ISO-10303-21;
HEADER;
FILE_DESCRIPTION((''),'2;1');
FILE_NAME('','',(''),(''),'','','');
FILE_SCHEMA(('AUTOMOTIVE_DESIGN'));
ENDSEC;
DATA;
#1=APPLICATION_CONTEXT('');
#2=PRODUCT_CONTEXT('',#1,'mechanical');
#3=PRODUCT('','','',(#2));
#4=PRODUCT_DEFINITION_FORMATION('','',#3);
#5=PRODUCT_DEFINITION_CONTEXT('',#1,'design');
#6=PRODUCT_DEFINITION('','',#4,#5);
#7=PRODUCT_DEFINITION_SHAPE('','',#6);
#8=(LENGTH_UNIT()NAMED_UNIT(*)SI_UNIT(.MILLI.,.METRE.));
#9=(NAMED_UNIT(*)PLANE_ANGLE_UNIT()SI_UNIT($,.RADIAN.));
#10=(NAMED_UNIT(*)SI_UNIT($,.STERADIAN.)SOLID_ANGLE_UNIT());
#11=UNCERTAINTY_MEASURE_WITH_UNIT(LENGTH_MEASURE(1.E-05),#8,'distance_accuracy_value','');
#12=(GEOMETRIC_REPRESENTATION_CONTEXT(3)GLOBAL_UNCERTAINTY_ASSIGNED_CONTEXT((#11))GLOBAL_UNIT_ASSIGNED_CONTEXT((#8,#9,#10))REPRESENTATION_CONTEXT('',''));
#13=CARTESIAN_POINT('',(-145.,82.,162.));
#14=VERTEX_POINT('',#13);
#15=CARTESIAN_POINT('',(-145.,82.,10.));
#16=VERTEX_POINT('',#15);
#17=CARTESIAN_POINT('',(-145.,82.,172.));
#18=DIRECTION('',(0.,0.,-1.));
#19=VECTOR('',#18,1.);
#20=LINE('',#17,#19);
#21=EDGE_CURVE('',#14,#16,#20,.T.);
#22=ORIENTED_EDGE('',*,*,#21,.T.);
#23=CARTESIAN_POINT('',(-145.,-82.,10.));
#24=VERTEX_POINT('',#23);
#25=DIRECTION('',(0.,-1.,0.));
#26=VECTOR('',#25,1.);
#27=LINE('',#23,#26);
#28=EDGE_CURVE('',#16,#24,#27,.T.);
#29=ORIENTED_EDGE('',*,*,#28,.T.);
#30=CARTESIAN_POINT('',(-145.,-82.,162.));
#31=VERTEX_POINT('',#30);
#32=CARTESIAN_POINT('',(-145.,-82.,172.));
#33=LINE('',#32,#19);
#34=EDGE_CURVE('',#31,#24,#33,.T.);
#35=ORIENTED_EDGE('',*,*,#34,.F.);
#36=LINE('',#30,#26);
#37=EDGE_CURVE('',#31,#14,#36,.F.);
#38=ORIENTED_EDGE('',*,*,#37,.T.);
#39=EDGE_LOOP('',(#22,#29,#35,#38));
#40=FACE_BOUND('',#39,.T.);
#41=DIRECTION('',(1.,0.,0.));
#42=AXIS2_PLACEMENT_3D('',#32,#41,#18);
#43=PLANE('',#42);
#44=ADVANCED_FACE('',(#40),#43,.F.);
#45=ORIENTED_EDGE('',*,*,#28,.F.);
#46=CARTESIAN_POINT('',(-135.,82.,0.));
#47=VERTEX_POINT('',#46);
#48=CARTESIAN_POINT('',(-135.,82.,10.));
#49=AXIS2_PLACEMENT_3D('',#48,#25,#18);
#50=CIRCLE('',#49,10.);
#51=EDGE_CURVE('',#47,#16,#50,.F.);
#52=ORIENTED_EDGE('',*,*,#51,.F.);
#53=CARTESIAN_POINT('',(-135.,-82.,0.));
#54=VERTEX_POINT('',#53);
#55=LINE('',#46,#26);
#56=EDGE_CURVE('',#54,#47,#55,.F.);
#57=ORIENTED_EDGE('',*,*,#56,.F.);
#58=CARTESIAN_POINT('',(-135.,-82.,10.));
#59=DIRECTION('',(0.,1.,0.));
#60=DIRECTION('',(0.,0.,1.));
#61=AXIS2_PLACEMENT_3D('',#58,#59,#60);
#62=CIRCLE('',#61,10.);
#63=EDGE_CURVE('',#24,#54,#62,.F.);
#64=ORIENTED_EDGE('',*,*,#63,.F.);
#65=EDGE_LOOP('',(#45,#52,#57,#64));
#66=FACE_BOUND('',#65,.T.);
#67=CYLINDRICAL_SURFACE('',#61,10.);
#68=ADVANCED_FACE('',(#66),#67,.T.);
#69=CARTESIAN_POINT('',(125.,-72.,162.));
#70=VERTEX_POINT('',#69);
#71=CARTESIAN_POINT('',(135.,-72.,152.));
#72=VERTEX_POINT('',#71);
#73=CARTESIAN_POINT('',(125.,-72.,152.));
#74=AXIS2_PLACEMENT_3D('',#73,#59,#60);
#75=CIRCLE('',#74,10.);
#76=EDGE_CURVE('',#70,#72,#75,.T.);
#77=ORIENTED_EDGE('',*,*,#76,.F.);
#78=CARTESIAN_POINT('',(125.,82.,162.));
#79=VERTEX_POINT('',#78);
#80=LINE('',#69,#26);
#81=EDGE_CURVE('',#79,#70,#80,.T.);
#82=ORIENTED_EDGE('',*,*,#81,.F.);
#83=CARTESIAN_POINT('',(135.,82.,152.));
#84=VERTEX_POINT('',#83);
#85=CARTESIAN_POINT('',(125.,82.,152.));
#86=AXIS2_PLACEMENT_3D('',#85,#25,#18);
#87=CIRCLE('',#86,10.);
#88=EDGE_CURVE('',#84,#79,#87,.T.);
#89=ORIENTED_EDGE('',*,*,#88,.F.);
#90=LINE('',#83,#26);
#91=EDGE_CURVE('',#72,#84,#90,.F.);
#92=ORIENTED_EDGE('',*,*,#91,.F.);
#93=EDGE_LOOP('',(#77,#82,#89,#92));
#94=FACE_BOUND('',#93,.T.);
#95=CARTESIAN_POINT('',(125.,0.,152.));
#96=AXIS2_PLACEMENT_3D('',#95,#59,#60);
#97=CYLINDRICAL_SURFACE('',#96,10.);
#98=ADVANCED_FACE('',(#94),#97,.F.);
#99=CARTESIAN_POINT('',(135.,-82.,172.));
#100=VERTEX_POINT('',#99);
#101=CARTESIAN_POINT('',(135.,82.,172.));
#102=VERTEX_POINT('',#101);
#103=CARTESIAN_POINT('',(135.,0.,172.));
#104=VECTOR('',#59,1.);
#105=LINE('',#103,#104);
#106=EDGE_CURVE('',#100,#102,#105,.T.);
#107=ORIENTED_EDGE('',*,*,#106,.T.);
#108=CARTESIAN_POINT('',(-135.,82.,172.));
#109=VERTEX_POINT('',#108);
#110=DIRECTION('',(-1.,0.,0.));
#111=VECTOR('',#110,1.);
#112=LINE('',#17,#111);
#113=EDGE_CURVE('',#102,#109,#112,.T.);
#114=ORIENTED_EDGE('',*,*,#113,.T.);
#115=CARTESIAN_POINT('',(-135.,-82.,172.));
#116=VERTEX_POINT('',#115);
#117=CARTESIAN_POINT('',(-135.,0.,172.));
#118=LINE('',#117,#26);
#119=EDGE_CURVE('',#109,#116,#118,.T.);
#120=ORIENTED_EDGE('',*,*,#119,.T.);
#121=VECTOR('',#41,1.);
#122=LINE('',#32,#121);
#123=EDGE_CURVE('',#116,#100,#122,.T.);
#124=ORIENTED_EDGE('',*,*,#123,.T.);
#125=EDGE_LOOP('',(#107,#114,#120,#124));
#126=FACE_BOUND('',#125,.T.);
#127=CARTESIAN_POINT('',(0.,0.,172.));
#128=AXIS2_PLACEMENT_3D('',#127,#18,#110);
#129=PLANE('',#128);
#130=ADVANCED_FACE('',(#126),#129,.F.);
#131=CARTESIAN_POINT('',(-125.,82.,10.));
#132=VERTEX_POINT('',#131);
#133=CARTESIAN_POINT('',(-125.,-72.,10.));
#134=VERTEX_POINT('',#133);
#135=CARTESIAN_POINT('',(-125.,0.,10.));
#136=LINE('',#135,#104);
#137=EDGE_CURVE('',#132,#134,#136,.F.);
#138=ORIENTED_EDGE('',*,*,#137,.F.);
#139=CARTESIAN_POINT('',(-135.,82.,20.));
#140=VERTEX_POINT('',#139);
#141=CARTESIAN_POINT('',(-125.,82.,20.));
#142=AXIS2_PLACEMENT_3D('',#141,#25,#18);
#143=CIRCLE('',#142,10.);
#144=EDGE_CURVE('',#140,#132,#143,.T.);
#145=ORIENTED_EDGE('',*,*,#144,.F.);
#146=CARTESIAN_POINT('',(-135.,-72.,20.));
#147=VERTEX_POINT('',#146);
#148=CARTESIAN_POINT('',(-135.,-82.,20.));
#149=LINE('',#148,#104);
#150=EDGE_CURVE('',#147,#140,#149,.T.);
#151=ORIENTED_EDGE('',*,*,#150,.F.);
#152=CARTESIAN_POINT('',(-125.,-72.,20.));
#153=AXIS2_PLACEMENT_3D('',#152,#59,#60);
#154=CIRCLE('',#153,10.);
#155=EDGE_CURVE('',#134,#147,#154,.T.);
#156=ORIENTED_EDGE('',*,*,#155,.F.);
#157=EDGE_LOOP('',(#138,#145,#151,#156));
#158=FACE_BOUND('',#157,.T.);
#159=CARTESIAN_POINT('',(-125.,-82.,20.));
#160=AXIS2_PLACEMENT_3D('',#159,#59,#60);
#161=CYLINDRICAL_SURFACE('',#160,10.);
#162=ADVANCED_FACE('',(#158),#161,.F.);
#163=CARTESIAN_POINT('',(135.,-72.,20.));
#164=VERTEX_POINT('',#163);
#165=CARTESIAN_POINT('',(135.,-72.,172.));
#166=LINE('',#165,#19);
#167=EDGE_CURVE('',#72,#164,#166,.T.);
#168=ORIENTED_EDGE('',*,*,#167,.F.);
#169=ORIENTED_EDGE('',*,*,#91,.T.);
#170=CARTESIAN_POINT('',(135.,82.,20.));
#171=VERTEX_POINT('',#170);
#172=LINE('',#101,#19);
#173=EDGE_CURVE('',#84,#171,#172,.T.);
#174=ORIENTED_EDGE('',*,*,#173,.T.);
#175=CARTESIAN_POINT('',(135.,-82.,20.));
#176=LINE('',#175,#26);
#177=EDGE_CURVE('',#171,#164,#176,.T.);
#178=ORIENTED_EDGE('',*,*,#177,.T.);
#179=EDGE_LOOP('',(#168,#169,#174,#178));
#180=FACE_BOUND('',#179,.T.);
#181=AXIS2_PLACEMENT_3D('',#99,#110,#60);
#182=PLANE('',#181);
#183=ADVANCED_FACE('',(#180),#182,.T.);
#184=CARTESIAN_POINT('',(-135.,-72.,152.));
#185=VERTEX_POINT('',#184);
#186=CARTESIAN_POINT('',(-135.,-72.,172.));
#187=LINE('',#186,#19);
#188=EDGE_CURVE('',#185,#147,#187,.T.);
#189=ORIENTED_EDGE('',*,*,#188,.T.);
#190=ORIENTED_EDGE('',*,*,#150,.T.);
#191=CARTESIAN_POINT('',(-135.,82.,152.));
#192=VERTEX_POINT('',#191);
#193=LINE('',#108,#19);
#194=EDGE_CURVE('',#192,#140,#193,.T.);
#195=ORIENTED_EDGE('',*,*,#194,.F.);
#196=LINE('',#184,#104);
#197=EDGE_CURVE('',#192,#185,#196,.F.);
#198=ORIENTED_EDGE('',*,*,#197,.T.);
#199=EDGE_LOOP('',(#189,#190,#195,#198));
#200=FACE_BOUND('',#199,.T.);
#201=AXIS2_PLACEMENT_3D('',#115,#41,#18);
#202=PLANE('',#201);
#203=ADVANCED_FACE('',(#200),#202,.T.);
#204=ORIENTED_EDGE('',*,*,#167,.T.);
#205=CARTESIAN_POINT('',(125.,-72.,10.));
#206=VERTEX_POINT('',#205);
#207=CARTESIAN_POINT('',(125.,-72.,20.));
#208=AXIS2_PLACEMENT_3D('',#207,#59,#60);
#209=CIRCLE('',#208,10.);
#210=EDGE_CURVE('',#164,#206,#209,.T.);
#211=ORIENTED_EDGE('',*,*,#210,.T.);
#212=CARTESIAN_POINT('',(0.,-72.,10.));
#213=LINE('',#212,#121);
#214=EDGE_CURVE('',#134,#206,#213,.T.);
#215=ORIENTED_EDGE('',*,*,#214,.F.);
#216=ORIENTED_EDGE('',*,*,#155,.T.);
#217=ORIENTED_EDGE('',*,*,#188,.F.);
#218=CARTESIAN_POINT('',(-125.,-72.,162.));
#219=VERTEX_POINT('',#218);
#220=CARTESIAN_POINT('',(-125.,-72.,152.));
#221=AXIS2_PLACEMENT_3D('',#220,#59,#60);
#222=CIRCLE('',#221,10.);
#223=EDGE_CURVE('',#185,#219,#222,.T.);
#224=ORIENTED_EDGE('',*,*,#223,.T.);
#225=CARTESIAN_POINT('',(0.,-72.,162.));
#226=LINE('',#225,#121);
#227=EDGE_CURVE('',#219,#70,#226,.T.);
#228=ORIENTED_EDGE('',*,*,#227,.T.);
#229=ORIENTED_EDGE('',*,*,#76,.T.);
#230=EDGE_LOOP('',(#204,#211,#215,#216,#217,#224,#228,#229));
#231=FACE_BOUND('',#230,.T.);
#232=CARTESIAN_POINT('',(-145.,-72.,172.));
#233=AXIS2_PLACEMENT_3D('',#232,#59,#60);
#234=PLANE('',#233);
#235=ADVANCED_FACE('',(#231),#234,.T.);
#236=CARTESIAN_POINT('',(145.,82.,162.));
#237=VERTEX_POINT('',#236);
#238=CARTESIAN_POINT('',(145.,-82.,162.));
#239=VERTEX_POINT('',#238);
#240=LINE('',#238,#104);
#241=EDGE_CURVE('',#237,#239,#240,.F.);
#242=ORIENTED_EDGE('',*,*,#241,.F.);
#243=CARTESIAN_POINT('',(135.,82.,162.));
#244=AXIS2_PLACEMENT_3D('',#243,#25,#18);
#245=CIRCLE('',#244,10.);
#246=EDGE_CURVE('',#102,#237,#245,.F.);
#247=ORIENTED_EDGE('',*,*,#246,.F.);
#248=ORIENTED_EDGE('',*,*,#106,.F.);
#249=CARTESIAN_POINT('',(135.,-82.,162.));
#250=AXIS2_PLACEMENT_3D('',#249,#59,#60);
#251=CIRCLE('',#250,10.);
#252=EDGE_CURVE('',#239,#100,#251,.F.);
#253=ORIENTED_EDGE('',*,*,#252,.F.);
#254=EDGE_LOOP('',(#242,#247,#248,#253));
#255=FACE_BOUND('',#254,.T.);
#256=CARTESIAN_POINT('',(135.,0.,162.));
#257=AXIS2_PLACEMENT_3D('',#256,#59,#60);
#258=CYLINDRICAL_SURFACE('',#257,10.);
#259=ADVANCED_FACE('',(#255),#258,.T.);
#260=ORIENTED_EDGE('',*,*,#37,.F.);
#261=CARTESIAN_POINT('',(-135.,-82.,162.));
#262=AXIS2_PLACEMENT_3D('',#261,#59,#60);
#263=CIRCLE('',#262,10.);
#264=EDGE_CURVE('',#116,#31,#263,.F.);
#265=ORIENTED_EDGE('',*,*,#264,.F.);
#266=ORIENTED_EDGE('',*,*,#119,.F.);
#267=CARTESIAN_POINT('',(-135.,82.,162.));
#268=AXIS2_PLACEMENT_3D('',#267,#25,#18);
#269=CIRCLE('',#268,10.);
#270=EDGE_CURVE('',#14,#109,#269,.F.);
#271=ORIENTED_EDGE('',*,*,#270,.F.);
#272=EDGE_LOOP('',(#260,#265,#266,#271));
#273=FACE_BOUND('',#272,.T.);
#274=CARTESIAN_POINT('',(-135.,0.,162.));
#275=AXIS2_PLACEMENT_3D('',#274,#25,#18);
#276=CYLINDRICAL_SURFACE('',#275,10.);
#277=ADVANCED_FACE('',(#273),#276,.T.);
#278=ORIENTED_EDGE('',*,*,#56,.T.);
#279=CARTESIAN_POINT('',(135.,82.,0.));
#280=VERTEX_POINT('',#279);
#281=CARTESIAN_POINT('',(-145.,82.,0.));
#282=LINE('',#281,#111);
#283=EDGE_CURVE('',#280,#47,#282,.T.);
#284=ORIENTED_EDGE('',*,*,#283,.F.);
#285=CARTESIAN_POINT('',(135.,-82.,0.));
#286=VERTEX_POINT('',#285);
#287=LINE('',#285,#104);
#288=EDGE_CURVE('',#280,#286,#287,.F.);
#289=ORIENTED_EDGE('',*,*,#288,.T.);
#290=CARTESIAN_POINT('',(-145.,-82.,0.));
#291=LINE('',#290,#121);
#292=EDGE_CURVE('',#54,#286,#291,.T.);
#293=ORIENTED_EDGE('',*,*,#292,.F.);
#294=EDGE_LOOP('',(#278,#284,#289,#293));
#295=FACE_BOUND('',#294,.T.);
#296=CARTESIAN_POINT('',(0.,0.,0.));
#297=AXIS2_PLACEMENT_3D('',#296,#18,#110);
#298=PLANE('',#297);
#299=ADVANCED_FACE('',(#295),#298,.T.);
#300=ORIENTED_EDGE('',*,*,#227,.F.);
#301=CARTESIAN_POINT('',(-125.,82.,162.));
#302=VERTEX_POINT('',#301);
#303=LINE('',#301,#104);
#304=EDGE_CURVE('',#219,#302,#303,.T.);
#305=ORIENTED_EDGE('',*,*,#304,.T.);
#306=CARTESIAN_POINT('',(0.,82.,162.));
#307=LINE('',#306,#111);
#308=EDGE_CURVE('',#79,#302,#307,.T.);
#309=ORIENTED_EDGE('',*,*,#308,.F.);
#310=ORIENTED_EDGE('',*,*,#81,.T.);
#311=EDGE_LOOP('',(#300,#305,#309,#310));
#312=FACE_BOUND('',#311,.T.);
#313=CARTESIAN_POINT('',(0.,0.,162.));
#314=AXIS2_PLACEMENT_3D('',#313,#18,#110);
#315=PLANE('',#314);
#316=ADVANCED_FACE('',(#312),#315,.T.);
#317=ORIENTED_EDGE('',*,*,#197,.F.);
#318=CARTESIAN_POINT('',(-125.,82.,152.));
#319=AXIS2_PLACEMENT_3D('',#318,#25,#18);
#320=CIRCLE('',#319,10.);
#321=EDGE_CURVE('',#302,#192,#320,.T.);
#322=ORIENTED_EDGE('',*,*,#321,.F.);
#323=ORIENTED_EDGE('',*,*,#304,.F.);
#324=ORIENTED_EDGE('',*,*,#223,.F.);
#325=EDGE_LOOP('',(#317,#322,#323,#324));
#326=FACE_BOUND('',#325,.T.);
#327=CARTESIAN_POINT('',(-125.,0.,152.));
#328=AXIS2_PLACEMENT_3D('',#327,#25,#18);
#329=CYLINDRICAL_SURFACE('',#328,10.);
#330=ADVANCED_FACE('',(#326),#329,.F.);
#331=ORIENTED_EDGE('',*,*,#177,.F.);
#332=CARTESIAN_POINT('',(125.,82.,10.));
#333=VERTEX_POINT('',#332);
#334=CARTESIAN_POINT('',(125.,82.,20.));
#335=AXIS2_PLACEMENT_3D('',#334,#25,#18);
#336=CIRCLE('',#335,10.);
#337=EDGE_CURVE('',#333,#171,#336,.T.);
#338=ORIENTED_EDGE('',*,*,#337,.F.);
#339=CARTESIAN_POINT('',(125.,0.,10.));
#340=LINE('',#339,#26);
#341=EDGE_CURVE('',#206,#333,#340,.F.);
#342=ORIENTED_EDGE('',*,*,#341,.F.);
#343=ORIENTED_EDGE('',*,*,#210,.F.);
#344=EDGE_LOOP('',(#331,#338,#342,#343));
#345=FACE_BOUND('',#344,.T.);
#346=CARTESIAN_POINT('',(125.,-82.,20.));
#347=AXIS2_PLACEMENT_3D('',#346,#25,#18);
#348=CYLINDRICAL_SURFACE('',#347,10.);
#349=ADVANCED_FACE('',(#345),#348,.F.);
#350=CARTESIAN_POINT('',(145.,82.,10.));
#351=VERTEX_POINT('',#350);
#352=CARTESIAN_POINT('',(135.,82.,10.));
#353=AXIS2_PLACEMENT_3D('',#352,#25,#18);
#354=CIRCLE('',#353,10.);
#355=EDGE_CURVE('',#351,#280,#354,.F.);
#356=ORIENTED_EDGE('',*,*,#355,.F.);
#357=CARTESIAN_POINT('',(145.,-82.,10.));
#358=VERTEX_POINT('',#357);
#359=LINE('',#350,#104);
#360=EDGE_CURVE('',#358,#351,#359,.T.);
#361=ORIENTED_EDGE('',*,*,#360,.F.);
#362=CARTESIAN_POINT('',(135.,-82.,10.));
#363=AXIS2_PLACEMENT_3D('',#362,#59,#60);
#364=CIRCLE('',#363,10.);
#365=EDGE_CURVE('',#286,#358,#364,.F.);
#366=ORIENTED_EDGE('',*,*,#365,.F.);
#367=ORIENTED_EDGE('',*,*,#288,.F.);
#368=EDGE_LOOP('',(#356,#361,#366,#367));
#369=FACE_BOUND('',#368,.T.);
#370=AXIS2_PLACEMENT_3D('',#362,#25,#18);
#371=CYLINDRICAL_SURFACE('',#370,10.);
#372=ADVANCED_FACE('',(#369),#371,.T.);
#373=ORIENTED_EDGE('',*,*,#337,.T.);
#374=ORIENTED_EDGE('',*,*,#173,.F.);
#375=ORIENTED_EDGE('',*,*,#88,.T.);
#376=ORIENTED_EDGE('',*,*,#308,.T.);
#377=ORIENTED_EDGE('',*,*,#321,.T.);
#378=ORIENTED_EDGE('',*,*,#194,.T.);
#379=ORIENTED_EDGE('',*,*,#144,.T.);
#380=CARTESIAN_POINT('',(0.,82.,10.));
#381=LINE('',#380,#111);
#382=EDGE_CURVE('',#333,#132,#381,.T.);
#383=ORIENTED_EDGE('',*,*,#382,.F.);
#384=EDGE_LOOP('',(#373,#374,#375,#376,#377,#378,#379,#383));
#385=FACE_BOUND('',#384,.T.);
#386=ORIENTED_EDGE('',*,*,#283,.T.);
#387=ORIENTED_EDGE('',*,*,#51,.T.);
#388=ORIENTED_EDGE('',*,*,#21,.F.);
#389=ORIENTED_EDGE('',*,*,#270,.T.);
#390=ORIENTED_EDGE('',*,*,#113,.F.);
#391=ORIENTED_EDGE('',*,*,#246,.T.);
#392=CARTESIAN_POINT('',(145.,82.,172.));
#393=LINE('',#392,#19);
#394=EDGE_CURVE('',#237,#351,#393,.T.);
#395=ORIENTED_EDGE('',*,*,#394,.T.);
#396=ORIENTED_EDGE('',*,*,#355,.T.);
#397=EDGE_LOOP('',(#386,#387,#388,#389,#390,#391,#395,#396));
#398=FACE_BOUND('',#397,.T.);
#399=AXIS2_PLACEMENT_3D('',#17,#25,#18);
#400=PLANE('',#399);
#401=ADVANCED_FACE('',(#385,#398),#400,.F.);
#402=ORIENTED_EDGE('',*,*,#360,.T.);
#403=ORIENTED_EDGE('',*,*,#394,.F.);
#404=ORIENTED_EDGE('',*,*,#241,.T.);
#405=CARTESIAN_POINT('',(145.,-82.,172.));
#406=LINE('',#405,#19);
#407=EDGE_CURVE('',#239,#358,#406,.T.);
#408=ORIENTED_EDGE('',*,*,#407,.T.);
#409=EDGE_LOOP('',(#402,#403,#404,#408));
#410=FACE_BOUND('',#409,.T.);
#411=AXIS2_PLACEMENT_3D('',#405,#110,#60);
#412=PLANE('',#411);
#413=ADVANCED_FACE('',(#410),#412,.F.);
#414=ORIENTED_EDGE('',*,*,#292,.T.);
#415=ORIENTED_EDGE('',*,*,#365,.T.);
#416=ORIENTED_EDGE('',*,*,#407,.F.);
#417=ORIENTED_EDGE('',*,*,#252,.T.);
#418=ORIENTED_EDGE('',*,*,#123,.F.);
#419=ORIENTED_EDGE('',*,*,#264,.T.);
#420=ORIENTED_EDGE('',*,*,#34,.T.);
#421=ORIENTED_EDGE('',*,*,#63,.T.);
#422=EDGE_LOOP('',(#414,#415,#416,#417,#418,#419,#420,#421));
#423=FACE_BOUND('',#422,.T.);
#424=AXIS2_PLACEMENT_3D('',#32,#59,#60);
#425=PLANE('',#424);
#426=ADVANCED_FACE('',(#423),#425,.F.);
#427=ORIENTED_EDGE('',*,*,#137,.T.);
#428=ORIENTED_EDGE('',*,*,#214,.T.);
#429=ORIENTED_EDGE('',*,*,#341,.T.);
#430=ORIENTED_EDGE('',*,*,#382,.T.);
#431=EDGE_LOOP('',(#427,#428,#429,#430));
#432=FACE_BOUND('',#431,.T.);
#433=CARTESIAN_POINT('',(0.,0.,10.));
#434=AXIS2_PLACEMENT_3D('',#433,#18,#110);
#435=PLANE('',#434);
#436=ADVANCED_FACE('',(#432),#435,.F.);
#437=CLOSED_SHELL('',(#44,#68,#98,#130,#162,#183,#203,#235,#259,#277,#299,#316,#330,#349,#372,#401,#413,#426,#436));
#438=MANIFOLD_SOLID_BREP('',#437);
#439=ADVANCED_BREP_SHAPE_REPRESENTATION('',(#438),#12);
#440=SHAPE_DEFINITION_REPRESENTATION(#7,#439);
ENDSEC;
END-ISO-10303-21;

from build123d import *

# Parameters (mm, degrees)
CROQUIS1_W              = 290
CROQUIS1_H              = 164
SALIENTE_EXTRUIR1_DEPTH = 172
REDONDEO1_R             = 10
VACIADO1_START          = -135
VACIADO1_OUTLINE_W      = 154
VACIADO1_OUTLINE_H      = 152
VACIADO1_DEPTH          = 270
REDONDEO2_R             = 10


# Read off the part's stored shape, not the designer's step: Vaciado1
with BuildPart() as part:
    # Croquis1 → Saliente-Extruir1 (new body)
    with BuildSketch(Plane.XY):
        Rectangle(CROQUIS1_W, CROQUIS1_H)
    extrude(amount=SALIENTE_EXTRUIR1_DEPTH)

    # Redondeo1
    redondeo1_edges = [part.edges().sort_by_distance(p)[0] for p in [
        (-145, 0, 172),
        (145, 0, 172),
        (-145, 0, 0),
        (145, 0, 0),
    ]]
    fillet(redondeo1_edges, radius=REDONDEO1_R)

    # Vaciado1 outline → Vaciado1 (cut)
    with BuildSketch(Plane.YZ.offset(VACIADO1_START)):
        with Locations((5, 86)):
            Rectangle(VACIADO1_OUTLINE_W, VACIADO1_OUTLINE_H)
    extrude(amount=VACIADO1_DEPTH, mode=Mode.SUBTRACT)

    # Redondeo2
    redondeo2_edges = [part.edges().sort_by_distance(p)[0] for p in [
        (135, 5, 162),
        (-135, 5, 162),
        (-135, 5, 10),
        (135, 5, 10),
    ]]
    fillet(redondeo2_edges, radius=REDONDEO2_R)


solid = part.part
